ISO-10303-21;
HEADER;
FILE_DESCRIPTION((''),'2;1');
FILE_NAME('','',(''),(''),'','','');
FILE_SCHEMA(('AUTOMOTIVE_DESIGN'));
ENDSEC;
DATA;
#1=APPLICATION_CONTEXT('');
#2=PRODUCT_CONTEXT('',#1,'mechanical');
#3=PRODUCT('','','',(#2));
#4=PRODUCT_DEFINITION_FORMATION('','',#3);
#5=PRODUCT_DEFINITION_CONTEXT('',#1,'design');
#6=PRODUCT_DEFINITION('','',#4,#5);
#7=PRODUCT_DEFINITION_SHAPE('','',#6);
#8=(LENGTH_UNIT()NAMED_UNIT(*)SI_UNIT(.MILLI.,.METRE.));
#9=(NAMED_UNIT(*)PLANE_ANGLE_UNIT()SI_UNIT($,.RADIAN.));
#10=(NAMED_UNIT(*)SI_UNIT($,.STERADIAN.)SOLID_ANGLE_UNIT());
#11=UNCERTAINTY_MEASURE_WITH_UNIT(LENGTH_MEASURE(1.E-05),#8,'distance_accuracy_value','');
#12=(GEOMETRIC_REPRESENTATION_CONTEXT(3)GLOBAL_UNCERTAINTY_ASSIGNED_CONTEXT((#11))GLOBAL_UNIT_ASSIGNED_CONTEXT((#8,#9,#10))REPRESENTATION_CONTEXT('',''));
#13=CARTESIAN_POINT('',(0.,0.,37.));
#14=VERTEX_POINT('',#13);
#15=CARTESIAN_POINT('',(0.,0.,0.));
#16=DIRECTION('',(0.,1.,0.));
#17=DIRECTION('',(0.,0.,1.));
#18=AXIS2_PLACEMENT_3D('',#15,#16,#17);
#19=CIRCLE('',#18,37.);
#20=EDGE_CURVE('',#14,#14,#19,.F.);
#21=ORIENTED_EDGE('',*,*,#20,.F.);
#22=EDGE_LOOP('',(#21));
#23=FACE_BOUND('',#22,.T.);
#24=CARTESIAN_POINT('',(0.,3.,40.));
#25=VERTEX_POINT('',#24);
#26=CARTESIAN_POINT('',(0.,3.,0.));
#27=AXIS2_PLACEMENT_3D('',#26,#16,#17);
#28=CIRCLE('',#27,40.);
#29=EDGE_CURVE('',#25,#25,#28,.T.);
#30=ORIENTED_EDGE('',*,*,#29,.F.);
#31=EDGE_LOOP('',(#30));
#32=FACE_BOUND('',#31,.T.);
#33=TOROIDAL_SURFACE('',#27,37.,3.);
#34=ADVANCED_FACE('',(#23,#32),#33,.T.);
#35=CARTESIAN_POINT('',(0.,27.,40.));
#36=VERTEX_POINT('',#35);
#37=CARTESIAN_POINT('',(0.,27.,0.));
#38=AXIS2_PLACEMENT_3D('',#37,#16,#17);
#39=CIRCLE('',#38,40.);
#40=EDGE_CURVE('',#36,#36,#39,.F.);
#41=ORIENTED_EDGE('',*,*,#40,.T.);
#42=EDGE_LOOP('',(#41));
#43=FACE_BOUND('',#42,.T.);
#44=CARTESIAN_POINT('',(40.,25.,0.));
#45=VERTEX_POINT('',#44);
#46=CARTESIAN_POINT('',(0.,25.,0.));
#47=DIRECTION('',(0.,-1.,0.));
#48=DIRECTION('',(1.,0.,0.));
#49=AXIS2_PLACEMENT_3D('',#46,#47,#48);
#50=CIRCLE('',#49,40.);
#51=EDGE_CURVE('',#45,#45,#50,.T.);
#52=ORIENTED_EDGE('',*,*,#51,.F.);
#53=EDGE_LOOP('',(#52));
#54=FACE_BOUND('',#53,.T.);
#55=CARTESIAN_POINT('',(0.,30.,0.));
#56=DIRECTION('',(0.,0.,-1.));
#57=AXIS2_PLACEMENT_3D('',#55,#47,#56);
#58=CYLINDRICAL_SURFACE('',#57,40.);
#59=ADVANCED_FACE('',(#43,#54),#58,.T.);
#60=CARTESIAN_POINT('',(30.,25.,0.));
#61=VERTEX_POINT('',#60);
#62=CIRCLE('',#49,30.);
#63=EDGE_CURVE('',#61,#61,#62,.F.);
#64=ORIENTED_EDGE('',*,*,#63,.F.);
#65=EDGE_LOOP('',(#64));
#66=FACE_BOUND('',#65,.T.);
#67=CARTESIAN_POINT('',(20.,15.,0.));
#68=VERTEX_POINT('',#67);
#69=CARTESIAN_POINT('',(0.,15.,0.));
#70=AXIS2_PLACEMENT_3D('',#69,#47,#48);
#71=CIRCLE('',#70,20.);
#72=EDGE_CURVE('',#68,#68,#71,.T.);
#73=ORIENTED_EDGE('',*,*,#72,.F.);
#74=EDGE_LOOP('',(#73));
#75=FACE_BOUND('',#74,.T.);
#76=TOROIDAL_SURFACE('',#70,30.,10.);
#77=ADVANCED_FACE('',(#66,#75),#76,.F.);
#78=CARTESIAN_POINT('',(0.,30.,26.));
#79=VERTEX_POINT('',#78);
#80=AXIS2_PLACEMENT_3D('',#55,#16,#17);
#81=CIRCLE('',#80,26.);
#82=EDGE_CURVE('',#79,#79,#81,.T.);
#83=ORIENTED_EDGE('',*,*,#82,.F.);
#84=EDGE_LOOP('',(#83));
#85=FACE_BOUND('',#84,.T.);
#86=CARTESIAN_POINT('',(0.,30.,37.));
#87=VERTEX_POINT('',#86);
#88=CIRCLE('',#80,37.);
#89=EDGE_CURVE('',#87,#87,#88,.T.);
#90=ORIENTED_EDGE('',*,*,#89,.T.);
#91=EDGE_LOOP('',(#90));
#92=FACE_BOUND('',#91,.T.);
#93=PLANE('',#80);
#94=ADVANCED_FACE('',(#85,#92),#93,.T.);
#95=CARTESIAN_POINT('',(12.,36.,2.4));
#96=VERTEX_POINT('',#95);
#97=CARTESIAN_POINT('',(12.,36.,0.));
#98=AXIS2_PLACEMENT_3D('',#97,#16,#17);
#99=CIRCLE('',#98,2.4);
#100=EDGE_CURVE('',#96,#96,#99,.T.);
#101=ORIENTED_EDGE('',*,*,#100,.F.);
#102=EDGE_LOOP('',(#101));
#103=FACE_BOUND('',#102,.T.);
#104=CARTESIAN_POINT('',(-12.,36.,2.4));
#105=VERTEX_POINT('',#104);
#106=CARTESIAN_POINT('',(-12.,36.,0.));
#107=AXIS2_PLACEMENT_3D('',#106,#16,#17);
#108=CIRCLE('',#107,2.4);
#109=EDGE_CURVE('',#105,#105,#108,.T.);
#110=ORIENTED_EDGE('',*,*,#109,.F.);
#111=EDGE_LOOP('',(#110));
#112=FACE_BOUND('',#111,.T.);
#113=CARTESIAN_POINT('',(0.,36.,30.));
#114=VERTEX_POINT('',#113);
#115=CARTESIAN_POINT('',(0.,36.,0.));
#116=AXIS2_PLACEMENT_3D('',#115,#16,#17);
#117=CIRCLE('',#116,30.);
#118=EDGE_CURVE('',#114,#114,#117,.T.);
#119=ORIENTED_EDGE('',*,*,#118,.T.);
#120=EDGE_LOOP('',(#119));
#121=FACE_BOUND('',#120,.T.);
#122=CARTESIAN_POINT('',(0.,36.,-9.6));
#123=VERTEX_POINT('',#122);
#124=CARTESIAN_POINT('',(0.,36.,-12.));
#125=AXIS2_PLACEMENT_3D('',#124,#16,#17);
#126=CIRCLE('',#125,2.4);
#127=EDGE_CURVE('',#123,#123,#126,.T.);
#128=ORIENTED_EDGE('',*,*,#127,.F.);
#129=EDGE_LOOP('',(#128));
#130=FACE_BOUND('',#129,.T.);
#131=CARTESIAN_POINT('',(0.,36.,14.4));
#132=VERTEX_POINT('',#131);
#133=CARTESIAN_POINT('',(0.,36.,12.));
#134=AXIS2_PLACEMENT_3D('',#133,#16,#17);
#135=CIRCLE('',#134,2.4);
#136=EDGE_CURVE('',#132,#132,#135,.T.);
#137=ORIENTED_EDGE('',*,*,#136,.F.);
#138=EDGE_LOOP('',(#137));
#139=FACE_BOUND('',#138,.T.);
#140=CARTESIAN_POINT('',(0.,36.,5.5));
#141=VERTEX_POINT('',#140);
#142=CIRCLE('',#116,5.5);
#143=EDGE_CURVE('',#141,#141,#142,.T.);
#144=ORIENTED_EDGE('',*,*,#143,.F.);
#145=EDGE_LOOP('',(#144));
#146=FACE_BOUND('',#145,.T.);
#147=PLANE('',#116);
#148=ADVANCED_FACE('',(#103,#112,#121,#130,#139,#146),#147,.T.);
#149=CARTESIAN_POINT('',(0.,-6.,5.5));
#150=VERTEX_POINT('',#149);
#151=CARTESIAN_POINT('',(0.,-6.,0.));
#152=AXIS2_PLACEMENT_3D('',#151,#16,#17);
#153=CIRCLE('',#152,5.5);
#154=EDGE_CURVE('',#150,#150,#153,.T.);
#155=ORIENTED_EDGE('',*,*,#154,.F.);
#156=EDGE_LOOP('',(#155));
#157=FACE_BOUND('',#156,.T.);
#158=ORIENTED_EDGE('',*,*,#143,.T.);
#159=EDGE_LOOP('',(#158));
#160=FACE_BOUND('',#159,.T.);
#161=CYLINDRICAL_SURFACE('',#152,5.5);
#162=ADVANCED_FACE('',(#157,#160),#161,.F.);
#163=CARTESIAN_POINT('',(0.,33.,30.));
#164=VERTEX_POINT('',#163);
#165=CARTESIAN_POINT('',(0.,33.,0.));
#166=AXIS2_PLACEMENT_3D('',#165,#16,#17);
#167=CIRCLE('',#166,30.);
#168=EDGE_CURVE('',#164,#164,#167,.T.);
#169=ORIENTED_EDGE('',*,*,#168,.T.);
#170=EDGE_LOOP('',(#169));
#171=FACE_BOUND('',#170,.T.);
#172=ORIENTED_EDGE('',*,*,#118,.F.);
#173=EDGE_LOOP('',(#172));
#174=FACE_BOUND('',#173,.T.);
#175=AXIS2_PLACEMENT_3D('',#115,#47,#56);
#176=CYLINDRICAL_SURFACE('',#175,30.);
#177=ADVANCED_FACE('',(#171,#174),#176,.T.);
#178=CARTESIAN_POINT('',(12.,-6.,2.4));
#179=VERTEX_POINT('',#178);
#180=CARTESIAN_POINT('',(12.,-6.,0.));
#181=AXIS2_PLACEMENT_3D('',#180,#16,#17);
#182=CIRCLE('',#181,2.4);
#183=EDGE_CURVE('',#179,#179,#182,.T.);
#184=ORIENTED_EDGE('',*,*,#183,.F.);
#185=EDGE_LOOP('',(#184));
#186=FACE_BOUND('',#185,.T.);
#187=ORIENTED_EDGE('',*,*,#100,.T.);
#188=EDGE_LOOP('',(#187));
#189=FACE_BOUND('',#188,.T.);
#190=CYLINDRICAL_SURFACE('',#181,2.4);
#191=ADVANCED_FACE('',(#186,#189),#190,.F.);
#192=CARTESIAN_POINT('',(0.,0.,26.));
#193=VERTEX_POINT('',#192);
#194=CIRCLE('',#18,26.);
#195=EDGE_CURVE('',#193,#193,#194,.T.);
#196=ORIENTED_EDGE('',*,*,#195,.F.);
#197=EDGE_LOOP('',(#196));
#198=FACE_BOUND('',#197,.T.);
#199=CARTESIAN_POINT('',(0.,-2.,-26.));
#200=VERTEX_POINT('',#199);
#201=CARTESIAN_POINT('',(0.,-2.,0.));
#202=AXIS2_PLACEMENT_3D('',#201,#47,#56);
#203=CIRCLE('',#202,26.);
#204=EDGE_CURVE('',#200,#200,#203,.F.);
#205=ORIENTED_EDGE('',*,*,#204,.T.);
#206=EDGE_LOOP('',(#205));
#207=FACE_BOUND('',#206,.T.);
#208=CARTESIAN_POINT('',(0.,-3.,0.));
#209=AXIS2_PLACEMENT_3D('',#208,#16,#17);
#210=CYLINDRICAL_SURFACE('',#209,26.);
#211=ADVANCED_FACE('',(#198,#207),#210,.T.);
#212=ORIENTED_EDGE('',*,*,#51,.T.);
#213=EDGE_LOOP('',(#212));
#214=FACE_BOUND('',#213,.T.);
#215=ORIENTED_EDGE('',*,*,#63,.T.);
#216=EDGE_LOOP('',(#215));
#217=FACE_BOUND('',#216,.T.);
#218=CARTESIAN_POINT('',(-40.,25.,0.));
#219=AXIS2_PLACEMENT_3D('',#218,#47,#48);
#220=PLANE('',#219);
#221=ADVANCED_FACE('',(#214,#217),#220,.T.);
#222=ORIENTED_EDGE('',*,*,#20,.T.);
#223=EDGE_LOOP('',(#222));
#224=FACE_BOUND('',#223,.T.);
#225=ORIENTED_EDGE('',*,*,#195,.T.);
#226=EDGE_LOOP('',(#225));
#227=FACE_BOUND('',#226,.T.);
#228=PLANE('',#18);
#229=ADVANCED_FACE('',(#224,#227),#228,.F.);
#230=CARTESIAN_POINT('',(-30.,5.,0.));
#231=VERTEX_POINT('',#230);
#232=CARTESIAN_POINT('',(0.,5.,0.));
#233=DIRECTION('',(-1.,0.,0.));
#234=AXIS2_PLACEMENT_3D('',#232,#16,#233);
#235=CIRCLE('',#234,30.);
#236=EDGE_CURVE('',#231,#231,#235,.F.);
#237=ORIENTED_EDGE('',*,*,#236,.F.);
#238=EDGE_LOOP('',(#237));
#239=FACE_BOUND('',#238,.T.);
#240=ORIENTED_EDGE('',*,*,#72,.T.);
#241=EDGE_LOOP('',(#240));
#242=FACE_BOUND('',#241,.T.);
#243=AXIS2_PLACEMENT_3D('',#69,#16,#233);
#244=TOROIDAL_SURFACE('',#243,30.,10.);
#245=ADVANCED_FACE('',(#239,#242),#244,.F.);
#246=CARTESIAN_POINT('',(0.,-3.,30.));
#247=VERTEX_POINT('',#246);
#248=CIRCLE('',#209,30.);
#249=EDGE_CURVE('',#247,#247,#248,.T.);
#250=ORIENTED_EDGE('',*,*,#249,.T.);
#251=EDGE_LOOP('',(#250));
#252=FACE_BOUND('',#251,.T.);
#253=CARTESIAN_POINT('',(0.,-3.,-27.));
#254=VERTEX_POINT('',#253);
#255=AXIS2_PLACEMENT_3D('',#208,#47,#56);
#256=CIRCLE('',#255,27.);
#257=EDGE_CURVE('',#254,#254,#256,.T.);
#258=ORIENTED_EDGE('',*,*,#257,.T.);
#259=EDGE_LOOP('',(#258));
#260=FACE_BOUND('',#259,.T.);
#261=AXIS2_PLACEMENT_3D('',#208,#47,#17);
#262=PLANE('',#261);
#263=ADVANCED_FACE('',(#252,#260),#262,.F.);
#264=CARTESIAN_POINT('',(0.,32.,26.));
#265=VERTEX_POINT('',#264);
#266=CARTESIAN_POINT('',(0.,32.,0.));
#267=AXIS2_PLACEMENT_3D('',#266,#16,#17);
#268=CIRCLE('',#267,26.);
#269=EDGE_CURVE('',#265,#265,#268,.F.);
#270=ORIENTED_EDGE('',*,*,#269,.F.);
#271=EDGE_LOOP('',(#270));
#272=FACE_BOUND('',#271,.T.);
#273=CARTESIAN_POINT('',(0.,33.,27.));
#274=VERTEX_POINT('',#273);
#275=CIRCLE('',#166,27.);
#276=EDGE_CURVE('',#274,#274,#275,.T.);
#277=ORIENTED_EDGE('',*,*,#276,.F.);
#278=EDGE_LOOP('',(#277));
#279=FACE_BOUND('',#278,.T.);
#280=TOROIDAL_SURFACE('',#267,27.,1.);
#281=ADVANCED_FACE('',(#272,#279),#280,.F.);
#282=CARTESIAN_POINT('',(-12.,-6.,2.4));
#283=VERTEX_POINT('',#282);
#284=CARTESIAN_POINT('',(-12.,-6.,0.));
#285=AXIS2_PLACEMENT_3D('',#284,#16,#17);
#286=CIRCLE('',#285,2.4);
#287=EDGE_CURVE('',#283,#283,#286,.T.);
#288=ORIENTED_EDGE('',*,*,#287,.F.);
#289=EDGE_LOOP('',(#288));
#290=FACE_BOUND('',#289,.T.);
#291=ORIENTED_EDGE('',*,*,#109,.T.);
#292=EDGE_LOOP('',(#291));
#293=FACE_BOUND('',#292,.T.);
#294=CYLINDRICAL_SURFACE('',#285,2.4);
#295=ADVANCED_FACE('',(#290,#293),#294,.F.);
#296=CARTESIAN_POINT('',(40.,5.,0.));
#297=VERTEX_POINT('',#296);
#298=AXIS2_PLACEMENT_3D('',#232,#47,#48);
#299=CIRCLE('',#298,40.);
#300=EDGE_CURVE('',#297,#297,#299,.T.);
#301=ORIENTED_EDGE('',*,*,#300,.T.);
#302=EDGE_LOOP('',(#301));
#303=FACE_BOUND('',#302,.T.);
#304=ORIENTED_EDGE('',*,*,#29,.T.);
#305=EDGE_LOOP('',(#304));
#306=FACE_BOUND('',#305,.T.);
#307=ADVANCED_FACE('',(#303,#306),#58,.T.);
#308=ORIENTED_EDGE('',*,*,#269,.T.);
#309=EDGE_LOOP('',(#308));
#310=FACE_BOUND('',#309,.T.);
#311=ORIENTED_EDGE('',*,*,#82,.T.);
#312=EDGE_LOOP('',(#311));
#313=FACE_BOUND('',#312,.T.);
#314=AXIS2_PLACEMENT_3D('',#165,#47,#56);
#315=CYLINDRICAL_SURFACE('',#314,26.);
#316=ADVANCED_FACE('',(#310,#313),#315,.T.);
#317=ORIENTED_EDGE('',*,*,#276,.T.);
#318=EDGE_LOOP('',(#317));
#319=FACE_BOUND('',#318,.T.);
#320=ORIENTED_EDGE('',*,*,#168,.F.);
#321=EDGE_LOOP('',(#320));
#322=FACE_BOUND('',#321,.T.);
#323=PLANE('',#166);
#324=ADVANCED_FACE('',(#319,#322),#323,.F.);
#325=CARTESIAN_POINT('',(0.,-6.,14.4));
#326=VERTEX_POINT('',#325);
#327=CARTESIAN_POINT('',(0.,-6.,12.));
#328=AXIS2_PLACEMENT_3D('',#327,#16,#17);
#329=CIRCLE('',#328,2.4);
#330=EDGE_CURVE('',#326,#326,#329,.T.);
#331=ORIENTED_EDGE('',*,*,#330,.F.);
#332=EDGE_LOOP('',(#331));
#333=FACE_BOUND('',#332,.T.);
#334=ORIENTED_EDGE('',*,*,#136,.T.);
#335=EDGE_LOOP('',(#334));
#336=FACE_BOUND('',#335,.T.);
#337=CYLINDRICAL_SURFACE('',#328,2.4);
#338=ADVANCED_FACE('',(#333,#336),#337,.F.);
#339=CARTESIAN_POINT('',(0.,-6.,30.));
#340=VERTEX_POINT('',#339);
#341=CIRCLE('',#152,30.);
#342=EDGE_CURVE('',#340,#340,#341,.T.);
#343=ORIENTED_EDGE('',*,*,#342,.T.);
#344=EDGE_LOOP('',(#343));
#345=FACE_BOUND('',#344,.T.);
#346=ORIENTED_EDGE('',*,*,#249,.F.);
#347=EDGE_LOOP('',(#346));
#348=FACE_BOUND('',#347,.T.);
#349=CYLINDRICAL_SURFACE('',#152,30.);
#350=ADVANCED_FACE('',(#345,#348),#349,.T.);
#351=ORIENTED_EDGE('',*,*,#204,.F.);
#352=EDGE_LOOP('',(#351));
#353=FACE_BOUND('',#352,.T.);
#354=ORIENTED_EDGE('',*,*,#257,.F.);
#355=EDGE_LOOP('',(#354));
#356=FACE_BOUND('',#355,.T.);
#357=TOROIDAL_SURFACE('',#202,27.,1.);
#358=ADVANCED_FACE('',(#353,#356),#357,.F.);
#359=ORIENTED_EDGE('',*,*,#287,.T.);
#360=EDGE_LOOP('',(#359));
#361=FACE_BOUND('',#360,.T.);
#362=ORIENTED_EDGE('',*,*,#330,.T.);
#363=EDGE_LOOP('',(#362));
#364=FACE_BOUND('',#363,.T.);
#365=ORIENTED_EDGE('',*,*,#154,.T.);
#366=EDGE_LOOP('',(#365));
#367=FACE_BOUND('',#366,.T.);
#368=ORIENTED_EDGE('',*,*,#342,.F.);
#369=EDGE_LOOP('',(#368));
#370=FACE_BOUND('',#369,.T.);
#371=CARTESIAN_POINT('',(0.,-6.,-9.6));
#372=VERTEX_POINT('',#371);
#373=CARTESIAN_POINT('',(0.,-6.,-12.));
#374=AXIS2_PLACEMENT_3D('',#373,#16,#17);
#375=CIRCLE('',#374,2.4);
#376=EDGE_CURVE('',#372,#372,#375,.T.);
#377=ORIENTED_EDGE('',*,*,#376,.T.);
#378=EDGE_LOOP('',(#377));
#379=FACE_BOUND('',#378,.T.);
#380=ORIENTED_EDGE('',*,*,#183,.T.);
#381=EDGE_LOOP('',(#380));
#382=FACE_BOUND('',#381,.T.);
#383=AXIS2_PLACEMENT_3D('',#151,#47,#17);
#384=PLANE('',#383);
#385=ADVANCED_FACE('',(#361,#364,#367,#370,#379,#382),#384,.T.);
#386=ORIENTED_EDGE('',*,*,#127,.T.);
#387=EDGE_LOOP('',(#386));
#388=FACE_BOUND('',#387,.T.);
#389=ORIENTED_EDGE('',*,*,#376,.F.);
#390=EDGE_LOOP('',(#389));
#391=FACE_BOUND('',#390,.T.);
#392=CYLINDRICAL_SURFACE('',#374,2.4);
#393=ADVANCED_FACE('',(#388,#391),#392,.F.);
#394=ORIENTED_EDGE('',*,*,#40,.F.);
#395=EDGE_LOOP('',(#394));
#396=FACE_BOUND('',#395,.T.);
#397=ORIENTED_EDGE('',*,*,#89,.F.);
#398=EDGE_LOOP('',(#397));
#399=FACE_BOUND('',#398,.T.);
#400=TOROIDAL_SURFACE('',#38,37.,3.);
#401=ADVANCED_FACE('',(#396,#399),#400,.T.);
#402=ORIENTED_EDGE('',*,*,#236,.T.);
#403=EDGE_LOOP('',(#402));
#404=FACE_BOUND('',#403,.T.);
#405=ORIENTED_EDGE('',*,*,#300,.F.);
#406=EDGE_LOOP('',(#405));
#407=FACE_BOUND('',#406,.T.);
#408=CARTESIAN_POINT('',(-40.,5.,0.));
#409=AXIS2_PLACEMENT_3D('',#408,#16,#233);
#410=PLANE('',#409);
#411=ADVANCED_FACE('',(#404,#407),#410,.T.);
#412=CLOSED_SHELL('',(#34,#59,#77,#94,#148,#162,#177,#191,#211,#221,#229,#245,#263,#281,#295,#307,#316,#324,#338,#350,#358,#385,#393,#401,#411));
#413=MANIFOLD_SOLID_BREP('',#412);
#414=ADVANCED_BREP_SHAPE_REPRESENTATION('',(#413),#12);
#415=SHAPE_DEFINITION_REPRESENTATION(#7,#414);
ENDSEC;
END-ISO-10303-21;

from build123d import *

# Parameters (mm, degrees)
SKETCH_1_R             = 40
EXTRUDE_1_DEPTH        = 30
SKETCH_2_R             = 26
EXTRUDE_2_DEPTH        = 3
SKETCH_3_R             = 30
EXTRUDE_3_DEPTH        = 3
FILLET_1_R             = 1
FILLET_1_OF_MIRROR_1_R = 1
SKETCH_4_W             = 20
SKETCH_4_H             = 20
FILLET_2_R             = 10
FILLET_3_R             = 3
FILLET_4_R             = 3
SKETCH_5_R             = 5.5
SKETCH_5_R_2           = 2.4
CUT_EXTRUDE_1_DEPTH    = 71.455659815


with BuildPart() as part:
    # 草图1 → 凸台-拉伸1 (new body)
    with BuildSketch(Plane(origin=(0, 0, 0), x_dir=(1, 0, 0), z_dir=(0, 1, 0))):
        with Locations(Location((0, 0, 0), (0, 0, 270))):
            Circle(SKETCH_1_R)
    extrude(amount=EXTRUDE_1_DEPTH)

    # 草图2 → 凸台-拉伸2 (add)
    with BuildSketch(Plane(origin=(0, 30, 0), x_dir=(1, 0, 0), z_dir=(0, 1, 0))):
        with Locations(Location((0, 0, 0), (0, 0, 270))):
            Circle(SKETCH_2_R)
    extrude_2 = extrude(amount=EXTRUDE_2_DEPTH)

    # 草图3 → 凸台-拉伸3 (add)
    with BuildSketch(Plane(origin=(0, 33, 0), x_dir=(1, 0, 0), z_dir=(0, 1, 0))):
        with Locations(Location((0, 0, 0), (0, 0, 270))):
            Circle(SKETCH_3_R)
    extrude_3 = extrude(amount=EXTRUDE_3_DEPTH)

    # 圆角1
    fillet_1_edges = [part.edges().sort_by_distance(p)[0] for p in [
        (0, 33, -26),
    ]]
    fillet(fillet_1_edges, radius=FILLET_1_R)

    # 镜向1: 凸台-拉伸2, 凸台-拉伸3 across plane
    add(extrude_2.mirror(Plane.ZX.offset(15)))
    add(extrude_3.mirror(Plane.ZX.offset(15)))

    # 圆角1 of 镜向1
    fillet_1_of_mirror_1_edges = [part.edges().sort_by_distance(p)[0] for p in [
        (0, -3, -26),
    ]]
    fillet(fillet_1_of_mirror_1_edges, radius=FILLET_1_OF_MIRROR_1_R)

    # 草图4 → 切除-旋转1 (revolve, cut)
    with BuildSketch(Plane.XY, mode=Mode.PRIVATE) as cut_revolve_1_sk:
        with Locations((-30, 15)):
            Rectangle(SKETCH_4_W, SKETCH_4_H)
    revolve(cut_revolve_1_sk.sketch.rotate(Axis((0, -1000, 0), (0, 1, 0)), 180), axis=Axis((0, -1000, 0), (0, 1, 0)), mode=Mode.SUBTRACT)

    # 圆角2
    fillet_2_edges = [part.edges().sort_by_distance(p)[0] for p in [
        (-20, 5, 0),
        (-20, 25, 0),
    ]]
    fillet(fillet_2_edges, radius=FILLET_2_R - 0.0001)  # a hair under: the kernel refuses the full size

    # 圆角3
    fillet_3_edges = [part.edges().sort_by_distance(p)[0] for p in [
        (0, 0, -40),
    ]]
    fillet(fillet_3_edges, radius=FILLET_3_R)

    # 圆角4
    fillet_4_edges = [part.edges().sort_by_distance(p)[0] for p in [
        (0, 30, -40),
    ]]
    fillet(fillet_4_edges, radius=FILLET_4_R)

    # 草图5 → 切除-拉伸1 (cut, through all)
    with BuildSketch(Plane(origin=(0, 36, 0), x_dir=(1, 0, 0), z_dir=(0, 1, 0))):
        with Locations(Location((0, 0, 0), (0, 0, 270))):
            Circle(SKETCH_5_R)
        with Locations(Location((0, 12, 0), (0, 0, 270))):
            Circle(SKETCH_5_R_2)
        with Locations(Location((12, 0, 0), (0, 0, 270))):
            Circle(SKETCH_5_R_2)
        with Locations(Location((0, -12, 0), (0, 0, 270))):
            Circle(SKETCH_5_R_2)
        with Locations(Location((-12, 0, 0), (0, 0, 270))):
            Circle(SKETCH_5_R_2)
    extrude(amount=-CUT_EXTRUDE_1_DEPTH, mode=Mode.SUBTRACT)


solid = part.part
